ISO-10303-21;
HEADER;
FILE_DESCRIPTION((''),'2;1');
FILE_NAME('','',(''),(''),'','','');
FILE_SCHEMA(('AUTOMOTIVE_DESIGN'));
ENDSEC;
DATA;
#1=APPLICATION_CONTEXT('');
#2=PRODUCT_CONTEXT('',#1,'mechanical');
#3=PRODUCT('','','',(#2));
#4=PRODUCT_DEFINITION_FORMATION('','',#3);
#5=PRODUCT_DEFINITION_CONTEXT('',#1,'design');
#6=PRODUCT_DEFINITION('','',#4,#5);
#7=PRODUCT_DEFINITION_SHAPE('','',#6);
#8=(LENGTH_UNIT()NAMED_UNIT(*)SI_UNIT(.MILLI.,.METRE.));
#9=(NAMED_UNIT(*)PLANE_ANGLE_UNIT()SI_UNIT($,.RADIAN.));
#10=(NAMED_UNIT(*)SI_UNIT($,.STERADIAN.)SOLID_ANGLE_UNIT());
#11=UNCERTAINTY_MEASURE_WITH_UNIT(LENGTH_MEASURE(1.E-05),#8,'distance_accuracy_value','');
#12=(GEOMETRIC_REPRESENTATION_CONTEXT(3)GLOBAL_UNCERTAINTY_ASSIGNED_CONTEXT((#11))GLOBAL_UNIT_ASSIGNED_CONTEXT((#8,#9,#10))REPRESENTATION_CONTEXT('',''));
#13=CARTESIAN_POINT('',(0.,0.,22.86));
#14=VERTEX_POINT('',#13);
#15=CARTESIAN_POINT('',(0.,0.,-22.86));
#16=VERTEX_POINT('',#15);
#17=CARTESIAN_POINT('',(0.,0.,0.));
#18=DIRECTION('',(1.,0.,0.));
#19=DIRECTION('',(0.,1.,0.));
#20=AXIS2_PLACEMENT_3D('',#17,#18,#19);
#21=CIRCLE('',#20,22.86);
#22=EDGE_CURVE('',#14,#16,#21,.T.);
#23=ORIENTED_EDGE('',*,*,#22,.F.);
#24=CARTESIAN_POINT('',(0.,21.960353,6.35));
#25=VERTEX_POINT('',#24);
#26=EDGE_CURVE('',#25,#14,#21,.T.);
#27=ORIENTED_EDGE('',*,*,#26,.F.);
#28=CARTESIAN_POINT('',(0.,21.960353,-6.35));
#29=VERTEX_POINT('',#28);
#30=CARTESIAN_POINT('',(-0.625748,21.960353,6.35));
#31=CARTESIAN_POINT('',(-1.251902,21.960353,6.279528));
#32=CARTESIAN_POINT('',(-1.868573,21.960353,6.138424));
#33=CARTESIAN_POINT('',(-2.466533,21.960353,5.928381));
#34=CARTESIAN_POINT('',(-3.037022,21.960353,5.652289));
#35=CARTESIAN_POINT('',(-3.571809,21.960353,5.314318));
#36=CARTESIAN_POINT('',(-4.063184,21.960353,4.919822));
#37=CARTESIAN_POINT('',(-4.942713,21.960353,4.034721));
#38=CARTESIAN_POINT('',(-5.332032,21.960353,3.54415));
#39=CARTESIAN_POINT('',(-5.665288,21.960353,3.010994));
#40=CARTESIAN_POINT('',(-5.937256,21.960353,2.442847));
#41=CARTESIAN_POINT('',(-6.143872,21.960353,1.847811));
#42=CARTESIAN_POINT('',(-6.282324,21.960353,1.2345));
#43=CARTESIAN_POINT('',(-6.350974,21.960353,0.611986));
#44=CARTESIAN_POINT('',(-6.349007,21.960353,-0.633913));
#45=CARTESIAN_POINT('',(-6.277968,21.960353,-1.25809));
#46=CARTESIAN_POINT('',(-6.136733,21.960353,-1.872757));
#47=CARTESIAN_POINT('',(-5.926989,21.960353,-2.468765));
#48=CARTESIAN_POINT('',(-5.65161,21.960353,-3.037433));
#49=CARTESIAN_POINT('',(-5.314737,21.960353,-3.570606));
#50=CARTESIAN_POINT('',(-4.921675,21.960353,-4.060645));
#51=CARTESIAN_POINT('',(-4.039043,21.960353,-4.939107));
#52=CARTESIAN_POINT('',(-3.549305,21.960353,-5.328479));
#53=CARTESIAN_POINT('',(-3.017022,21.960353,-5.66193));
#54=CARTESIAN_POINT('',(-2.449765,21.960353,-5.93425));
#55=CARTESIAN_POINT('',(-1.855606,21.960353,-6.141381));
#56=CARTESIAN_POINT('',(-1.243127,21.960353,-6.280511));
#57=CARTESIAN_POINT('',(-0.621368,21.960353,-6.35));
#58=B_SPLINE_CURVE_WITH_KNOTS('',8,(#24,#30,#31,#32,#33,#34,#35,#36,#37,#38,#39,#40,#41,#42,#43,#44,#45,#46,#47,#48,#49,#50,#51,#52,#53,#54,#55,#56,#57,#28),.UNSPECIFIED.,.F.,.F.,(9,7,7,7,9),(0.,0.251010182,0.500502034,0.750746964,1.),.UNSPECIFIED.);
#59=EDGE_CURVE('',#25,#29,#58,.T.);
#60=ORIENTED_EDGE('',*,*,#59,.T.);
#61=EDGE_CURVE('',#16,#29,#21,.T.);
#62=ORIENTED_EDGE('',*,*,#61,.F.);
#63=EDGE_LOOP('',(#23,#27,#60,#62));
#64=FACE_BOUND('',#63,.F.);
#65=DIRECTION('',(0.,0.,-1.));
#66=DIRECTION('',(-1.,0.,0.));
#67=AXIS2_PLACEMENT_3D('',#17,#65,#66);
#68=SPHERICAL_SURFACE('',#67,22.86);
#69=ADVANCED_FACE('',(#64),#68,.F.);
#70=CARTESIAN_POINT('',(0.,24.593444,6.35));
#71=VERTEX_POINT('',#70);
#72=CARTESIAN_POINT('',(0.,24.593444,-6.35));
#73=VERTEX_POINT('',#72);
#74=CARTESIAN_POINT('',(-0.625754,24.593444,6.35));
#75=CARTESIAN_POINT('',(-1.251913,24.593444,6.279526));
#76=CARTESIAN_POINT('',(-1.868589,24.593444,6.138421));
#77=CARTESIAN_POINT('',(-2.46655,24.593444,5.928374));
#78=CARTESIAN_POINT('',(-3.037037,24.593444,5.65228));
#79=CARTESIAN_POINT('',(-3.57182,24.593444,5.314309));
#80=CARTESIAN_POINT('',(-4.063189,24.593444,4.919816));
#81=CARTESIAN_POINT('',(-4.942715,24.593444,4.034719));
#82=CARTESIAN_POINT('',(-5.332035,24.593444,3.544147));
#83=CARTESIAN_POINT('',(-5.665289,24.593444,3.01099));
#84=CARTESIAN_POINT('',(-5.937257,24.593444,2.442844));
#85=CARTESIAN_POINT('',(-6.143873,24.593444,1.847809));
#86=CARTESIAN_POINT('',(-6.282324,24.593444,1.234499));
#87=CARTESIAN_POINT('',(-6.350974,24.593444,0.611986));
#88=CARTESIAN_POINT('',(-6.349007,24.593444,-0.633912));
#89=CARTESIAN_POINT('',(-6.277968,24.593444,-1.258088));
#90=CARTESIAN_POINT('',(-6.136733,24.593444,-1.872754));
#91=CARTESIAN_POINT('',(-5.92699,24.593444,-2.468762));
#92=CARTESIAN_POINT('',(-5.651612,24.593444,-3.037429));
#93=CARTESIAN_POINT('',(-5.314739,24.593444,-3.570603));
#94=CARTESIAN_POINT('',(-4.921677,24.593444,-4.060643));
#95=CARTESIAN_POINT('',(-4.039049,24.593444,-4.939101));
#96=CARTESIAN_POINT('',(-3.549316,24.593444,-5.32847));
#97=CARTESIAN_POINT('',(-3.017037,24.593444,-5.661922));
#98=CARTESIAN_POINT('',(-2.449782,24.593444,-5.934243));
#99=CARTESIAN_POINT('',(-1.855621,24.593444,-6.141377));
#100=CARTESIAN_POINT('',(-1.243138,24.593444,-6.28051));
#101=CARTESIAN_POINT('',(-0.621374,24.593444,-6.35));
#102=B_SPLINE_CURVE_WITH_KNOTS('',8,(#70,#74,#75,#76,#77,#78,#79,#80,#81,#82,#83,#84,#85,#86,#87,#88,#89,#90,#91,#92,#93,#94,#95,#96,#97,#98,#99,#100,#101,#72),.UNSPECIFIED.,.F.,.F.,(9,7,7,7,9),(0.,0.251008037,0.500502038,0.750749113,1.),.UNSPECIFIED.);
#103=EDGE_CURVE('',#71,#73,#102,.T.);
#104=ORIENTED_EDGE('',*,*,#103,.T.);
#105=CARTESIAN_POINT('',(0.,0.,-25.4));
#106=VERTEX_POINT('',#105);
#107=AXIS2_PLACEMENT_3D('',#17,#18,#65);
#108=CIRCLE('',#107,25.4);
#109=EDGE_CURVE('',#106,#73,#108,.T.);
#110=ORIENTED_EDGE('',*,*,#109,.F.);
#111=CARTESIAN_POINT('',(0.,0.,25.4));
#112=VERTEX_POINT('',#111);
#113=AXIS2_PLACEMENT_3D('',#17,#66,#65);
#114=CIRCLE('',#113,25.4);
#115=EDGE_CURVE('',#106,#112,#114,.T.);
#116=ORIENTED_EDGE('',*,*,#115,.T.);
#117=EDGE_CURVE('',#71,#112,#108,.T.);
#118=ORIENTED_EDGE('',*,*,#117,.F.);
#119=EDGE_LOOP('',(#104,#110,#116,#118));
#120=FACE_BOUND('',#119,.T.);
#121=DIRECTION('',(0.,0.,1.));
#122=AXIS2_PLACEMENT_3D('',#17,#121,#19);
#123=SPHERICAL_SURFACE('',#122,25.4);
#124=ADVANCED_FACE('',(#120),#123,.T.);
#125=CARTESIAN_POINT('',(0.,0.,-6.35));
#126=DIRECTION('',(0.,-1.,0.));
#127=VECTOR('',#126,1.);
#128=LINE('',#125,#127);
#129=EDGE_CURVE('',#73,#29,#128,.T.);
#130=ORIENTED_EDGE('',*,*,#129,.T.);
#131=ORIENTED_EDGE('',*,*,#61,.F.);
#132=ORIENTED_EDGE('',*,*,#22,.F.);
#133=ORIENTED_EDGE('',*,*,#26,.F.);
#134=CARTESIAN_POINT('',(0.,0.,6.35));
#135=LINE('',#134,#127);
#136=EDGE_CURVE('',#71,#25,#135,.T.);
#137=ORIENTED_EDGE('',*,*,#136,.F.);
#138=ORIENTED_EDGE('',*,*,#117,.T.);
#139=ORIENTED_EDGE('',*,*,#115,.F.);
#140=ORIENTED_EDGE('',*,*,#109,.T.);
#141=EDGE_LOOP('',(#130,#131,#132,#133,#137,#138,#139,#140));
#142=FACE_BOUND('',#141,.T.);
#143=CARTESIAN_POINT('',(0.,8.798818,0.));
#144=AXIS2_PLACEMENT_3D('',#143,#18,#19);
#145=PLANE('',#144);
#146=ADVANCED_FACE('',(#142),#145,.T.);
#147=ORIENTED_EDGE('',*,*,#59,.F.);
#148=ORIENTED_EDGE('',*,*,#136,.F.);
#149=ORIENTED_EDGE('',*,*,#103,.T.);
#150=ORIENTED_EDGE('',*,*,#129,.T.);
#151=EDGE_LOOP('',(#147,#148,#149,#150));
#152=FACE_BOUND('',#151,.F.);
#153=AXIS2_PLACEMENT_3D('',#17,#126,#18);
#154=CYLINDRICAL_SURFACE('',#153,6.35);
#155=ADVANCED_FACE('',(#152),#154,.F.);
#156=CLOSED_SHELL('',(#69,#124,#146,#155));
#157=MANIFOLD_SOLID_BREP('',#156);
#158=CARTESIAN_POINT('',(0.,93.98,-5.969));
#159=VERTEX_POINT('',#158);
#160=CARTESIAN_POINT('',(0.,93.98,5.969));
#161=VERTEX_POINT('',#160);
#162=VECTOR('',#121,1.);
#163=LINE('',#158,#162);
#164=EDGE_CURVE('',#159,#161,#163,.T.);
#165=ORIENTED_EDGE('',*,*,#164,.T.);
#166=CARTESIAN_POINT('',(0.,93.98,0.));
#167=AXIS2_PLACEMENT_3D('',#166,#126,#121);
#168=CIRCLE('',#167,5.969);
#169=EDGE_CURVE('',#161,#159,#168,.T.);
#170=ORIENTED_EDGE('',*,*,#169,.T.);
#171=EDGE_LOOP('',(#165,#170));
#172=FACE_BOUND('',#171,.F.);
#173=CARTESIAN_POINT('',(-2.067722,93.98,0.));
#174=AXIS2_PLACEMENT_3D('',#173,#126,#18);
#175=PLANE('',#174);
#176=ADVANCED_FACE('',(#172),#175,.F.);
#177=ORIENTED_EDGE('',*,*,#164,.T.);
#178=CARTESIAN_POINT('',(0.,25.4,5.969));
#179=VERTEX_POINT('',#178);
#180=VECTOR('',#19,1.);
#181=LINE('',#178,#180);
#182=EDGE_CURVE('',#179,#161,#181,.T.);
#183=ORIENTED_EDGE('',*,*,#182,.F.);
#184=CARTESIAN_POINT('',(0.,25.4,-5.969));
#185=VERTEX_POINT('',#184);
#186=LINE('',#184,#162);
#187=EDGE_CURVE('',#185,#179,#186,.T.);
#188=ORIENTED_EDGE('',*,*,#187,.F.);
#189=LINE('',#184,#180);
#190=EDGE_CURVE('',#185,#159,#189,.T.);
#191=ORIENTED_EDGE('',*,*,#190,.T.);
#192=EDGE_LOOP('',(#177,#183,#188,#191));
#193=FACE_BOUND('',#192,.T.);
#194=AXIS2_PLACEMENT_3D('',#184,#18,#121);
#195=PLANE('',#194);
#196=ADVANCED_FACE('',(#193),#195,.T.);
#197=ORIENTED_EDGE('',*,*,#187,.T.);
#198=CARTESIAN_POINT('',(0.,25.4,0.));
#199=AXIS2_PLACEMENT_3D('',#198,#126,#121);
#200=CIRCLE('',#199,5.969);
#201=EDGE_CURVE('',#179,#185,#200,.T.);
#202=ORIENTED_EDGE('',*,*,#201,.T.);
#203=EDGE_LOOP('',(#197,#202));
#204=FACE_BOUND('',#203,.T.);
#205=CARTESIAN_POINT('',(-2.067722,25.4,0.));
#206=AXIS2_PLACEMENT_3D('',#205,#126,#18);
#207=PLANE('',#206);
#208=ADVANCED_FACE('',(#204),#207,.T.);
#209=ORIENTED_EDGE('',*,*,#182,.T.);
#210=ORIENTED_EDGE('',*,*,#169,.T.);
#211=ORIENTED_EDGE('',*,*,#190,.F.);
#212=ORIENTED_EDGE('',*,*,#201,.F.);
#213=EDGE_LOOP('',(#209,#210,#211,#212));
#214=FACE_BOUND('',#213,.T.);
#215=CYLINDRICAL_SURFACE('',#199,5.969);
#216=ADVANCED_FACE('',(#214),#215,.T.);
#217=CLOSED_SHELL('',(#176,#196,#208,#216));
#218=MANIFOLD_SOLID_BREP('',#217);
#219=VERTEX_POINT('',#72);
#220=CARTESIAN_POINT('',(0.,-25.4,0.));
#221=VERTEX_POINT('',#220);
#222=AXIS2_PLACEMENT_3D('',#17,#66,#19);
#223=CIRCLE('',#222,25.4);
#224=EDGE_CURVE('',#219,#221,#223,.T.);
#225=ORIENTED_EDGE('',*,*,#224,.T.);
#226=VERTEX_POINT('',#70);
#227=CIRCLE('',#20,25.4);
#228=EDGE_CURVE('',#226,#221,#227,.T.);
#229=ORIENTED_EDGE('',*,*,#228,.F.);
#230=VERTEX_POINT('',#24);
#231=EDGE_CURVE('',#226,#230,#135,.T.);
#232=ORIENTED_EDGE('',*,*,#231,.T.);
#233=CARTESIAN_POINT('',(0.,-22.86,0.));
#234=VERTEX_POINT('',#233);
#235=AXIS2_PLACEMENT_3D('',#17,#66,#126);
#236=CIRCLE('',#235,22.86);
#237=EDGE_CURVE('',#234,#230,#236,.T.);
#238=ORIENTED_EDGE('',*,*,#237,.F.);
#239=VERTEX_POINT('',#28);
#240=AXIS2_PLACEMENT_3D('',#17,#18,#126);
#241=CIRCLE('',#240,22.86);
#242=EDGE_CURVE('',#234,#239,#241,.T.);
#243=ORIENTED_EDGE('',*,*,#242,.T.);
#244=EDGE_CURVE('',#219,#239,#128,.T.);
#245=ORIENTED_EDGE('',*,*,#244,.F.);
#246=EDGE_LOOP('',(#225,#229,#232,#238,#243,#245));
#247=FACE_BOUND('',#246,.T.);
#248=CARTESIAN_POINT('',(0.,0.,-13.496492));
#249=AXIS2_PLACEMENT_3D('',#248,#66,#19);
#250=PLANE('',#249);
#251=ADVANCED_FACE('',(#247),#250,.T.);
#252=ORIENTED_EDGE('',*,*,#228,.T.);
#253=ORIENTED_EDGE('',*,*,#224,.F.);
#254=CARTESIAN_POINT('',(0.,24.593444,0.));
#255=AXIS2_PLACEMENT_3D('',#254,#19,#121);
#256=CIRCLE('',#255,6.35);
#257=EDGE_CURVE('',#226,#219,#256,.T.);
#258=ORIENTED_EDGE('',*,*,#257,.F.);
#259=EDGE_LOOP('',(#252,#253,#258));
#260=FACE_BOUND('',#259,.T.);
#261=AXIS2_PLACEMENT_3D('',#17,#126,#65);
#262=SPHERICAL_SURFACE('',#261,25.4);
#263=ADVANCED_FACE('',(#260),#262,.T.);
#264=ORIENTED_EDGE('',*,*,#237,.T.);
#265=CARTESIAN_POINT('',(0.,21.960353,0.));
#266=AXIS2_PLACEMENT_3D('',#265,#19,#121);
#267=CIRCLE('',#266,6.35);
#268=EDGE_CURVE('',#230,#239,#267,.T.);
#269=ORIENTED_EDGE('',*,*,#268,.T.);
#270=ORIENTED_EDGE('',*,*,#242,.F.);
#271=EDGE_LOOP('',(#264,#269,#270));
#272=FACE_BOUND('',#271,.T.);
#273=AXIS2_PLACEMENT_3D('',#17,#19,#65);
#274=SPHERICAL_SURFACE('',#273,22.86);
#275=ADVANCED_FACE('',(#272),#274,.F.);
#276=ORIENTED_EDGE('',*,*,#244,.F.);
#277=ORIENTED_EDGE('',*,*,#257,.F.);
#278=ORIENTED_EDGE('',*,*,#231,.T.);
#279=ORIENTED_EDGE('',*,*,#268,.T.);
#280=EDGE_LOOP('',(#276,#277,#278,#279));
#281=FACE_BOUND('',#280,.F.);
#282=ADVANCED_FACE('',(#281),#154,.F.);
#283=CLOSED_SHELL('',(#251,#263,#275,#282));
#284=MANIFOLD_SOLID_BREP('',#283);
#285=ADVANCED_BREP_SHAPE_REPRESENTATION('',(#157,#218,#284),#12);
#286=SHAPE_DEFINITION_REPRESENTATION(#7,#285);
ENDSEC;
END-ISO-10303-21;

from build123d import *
from build123d import SkipClean  # not in build123d's __all__

# Parameters (mm, degrees)
F1_ANGLE_START = 90
F1_ANGLE       = 180
F5_START       = -25.4
F5_DEPTH       = 68.58
F7_ANGLE_BACK  = 180
F7_ANGLE       = 180
F8_R           = 6.35
F9_DEPTH       = 25.654
F10_DEPTH      = 24.892


with BuildPart() as f1:
    # F0 (on Front) → F1 (revolve)
    with BuildSketch(Plane.XZ, mode=Mode.PRIVATE) as f1_sk:
        with BuildLine():
            ThreePointArc((25.2817304641, 2.448286082), (17.0729835342, 18.8062019887), (0, 25.4))
            Line((0, 25.4), (0, -25.4))
            ThreePointArc((0, -25.4), (18.8062019887, -17.0729835342), (25.2817304641, 2.448286082))
        make_face()
    revolve(f1_sk.sketch.rotate(Axis((0, 0, 0), (0, 0, 1)), F1_ANGLE_START), axis=Axis((0, 0, 0), (0, 0, 1)), revolution_arc=F1_ANGLE)

    # F2 (on Front) → F3 (revolve, cut)
    with BuildSketch(Plane.XZ):
        with BuildLine():
            Line((0, -22.86), (0, 22.86))
            ThreePointArc((0, 22.86), (-22.86, 0), (0, -22.86))
        make_face()
    with SkipClean():  # cleaning this boolean's faces spoils the solid; the shape is the same uncleaned
        revolve(axis=Axis((0, 0, 0), (0, 0, -1)), mode=Mode.SUBTRACT)


with BuildPart() as f5:
    # F4 (on Front) → F5 (new body)
    with BuildSketch(Plane.XZ.offset(F5_START)):
        with BuildLine():
            ThreePointArc((0, 5.969), (-5.969, 0), (0, -5.969))
            Line((0, -5.969), (0, 5.969))
        make_face()
    extrude(amount=-F5_DEPTH)


with BuildPart() as f7:
    # F6 (on Right) → F7 (revolve)
    with BuildSketch(Plane.YZ, mode=Mode.PRIVATE) as f7_sk:
        with BuildLine():
            ThreePointArc((-22.86, 0), (0, 22.86), (22.86, 0))
            Line((22.86, 0), (25.4, 0))
            ThreePointArc((25.4, 0), (0, 25.4), (-25.4, 0))
            Line((-25.4, 0), (-22.86, 0))
        make_face()
    revolve(f7_sk.sketch.rotate(Axis((0, 0, 0), (0, -1, 0)), -F7_ANGLE_BACK), axis=Axis((0, 0, 0), (0, -1, 0)), revolution_arc=F7_ANGLE)


with BuildPart() as f9_tool:
    # F8 (on Front) → F9 (new body)
    with BuildSketch(Plane.XZ):
        Circle(F8_R)
    extrude(amount=-F9_DEPTH)


with BuildPart() as f1_1:
    add(f1.part, clean=False)

    # F9: cut by f9_tool
    add(f9_tool.part, mode=Mode.SUBTRACT)

    # F8 (on Front) → F10 (cut)
    with BuildSketch(Plane.XZ):
        Circle(F8_R)
    extrude(amount=-F10_DEPTH, mode=Mode.SUBTRACT)


with BuildPart() as f7_1:
    add(f7.part, clean=False)

    # F9: cut by f9_tool
    add(f9_tool.part, mode=Mode.SUBTRACT)


solid = Compound([f5.part, f1_1.part, f7_1.part])
